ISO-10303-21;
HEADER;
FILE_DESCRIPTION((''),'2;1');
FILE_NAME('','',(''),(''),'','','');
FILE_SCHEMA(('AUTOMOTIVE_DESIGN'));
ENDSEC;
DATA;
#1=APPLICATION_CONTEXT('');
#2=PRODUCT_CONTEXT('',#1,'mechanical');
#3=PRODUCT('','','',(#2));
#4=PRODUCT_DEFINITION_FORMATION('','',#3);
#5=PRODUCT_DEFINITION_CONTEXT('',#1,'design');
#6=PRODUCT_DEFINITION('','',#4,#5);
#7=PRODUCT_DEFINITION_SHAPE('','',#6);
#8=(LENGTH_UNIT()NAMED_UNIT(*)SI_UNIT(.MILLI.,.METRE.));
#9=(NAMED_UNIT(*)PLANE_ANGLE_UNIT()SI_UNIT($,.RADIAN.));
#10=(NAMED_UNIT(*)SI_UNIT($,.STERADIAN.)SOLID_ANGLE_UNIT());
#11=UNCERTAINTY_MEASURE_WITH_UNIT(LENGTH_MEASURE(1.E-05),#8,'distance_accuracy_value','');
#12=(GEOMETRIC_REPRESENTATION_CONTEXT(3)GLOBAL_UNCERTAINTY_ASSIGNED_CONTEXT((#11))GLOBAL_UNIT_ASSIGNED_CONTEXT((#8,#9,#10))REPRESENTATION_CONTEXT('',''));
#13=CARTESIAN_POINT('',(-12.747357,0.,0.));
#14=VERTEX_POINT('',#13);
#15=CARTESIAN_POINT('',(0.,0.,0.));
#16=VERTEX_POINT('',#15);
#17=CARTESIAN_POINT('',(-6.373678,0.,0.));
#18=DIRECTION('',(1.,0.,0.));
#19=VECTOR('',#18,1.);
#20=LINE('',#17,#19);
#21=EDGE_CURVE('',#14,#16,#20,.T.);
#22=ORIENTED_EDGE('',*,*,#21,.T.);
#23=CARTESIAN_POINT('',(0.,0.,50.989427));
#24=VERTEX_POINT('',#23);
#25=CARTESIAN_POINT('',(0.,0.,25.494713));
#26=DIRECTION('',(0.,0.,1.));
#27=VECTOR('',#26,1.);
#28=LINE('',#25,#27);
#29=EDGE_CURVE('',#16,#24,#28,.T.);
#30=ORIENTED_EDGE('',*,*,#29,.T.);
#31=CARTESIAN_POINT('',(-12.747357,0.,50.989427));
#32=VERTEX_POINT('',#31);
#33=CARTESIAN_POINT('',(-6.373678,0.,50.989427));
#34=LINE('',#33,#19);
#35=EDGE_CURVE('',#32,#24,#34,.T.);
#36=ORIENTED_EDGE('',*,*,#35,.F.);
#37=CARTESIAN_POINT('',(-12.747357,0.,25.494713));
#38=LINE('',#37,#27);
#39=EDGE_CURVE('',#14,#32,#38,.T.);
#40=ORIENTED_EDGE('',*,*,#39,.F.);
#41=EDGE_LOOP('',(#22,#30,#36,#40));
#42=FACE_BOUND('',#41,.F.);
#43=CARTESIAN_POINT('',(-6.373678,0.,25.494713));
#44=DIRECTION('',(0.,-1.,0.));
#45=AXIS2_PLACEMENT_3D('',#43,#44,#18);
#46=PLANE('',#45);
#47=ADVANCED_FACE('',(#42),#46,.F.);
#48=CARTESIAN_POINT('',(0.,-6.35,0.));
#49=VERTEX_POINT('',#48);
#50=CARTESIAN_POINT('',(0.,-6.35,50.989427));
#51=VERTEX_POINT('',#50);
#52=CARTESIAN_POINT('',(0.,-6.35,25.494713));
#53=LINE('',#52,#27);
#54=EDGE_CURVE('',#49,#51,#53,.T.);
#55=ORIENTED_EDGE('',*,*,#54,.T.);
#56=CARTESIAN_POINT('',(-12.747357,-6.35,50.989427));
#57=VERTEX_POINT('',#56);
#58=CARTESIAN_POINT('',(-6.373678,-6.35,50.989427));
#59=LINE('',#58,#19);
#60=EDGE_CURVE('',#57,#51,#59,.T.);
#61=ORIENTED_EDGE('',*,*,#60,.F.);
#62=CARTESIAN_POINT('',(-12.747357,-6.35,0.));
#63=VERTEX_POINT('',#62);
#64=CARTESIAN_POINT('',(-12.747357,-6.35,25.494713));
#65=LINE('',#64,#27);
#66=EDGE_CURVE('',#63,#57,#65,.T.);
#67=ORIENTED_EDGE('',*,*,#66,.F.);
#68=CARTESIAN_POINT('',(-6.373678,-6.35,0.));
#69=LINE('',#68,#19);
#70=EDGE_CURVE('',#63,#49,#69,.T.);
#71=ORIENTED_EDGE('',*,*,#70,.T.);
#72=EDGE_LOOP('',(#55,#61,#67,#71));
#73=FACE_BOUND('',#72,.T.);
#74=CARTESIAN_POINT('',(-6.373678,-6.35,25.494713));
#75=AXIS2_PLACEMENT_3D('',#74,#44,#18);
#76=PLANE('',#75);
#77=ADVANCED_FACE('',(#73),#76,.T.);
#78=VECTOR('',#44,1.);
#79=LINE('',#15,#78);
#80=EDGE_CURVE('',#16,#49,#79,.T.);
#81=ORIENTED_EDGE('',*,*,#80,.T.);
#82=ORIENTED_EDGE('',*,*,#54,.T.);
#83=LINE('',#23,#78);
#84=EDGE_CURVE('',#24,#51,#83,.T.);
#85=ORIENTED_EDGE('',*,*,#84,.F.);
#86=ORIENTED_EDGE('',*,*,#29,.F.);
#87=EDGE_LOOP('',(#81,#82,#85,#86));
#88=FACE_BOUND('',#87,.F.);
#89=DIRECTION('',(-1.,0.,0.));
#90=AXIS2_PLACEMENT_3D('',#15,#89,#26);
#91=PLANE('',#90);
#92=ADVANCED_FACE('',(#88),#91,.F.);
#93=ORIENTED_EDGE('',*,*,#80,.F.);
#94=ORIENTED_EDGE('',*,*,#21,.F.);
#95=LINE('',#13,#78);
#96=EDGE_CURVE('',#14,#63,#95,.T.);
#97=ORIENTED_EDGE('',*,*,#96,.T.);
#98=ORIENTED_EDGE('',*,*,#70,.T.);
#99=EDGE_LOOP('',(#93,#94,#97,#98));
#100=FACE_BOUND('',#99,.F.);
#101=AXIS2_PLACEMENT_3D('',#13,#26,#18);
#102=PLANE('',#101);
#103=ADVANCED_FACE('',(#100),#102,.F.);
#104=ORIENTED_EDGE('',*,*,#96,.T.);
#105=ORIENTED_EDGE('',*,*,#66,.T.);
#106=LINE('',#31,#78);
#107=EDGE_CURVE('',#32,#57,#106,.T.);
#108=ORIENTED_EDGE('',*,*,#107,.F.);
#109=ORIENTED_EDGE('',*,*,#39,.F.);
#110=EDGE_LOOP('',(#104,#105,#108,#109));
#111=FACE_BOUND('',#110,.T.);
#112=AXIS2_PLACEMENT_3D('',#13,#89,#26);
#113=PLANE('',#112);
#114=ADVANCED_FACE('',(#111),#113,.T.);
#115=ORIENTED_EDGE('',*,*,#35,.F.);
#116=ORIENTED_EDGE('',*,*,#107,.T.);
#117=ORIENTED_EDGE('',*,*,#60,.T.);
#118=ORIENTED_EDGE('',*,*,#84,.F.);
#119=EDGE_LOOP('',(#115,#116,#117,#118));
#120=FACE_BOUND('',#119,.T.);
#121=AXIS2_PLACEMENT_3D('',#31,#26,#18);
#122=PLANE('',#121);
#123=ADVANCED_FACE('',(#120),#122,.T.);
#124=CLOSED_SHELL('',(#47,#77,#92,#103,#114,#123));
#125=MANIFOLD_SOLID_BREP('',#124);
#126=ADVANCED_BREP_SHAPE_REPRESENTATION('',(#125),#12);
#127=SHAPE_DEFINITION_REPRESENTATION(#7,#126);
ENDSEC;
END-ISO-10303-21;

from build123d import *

# Parameters (mm, degrees)
F0_W     = 25.4947114736
F0_H     = 43.1240350008
F1_DEPTH = 25.4
F2_T     = -2.54
F4_W     = 12.7473566681
F4_H     = 50.9894266725
F5_DEPTH = 6.35


with BuildPart() as f1:
    # F0 (on Front) → F1 (new body)
    with BuildSketch(Plane.XZ):
        with Locations((12.7473557368, 21.5620175004)):
            Rectangle(F0_W, F0_H)
    extrude(amount=F1_DEPTH)

    # F2
    f2_openings = [f1.faces().sort_by_distance(p)[0] for p in [
        (12.747356, -12.7, 43.124035),
    ]]
    offset(amount=F2_T, openings=f2_openings)


with BuildPart() as f5:
    # F4 (on Front) → F5 (new body)
    with BuildSketch(Plane.XZ):
        with Locations((-6.3736783341, 25.4947133362)):
            Rectangle(F4_W, F4_H)
    extrude(amount=F5_DEPTH)


solid = f5.part
